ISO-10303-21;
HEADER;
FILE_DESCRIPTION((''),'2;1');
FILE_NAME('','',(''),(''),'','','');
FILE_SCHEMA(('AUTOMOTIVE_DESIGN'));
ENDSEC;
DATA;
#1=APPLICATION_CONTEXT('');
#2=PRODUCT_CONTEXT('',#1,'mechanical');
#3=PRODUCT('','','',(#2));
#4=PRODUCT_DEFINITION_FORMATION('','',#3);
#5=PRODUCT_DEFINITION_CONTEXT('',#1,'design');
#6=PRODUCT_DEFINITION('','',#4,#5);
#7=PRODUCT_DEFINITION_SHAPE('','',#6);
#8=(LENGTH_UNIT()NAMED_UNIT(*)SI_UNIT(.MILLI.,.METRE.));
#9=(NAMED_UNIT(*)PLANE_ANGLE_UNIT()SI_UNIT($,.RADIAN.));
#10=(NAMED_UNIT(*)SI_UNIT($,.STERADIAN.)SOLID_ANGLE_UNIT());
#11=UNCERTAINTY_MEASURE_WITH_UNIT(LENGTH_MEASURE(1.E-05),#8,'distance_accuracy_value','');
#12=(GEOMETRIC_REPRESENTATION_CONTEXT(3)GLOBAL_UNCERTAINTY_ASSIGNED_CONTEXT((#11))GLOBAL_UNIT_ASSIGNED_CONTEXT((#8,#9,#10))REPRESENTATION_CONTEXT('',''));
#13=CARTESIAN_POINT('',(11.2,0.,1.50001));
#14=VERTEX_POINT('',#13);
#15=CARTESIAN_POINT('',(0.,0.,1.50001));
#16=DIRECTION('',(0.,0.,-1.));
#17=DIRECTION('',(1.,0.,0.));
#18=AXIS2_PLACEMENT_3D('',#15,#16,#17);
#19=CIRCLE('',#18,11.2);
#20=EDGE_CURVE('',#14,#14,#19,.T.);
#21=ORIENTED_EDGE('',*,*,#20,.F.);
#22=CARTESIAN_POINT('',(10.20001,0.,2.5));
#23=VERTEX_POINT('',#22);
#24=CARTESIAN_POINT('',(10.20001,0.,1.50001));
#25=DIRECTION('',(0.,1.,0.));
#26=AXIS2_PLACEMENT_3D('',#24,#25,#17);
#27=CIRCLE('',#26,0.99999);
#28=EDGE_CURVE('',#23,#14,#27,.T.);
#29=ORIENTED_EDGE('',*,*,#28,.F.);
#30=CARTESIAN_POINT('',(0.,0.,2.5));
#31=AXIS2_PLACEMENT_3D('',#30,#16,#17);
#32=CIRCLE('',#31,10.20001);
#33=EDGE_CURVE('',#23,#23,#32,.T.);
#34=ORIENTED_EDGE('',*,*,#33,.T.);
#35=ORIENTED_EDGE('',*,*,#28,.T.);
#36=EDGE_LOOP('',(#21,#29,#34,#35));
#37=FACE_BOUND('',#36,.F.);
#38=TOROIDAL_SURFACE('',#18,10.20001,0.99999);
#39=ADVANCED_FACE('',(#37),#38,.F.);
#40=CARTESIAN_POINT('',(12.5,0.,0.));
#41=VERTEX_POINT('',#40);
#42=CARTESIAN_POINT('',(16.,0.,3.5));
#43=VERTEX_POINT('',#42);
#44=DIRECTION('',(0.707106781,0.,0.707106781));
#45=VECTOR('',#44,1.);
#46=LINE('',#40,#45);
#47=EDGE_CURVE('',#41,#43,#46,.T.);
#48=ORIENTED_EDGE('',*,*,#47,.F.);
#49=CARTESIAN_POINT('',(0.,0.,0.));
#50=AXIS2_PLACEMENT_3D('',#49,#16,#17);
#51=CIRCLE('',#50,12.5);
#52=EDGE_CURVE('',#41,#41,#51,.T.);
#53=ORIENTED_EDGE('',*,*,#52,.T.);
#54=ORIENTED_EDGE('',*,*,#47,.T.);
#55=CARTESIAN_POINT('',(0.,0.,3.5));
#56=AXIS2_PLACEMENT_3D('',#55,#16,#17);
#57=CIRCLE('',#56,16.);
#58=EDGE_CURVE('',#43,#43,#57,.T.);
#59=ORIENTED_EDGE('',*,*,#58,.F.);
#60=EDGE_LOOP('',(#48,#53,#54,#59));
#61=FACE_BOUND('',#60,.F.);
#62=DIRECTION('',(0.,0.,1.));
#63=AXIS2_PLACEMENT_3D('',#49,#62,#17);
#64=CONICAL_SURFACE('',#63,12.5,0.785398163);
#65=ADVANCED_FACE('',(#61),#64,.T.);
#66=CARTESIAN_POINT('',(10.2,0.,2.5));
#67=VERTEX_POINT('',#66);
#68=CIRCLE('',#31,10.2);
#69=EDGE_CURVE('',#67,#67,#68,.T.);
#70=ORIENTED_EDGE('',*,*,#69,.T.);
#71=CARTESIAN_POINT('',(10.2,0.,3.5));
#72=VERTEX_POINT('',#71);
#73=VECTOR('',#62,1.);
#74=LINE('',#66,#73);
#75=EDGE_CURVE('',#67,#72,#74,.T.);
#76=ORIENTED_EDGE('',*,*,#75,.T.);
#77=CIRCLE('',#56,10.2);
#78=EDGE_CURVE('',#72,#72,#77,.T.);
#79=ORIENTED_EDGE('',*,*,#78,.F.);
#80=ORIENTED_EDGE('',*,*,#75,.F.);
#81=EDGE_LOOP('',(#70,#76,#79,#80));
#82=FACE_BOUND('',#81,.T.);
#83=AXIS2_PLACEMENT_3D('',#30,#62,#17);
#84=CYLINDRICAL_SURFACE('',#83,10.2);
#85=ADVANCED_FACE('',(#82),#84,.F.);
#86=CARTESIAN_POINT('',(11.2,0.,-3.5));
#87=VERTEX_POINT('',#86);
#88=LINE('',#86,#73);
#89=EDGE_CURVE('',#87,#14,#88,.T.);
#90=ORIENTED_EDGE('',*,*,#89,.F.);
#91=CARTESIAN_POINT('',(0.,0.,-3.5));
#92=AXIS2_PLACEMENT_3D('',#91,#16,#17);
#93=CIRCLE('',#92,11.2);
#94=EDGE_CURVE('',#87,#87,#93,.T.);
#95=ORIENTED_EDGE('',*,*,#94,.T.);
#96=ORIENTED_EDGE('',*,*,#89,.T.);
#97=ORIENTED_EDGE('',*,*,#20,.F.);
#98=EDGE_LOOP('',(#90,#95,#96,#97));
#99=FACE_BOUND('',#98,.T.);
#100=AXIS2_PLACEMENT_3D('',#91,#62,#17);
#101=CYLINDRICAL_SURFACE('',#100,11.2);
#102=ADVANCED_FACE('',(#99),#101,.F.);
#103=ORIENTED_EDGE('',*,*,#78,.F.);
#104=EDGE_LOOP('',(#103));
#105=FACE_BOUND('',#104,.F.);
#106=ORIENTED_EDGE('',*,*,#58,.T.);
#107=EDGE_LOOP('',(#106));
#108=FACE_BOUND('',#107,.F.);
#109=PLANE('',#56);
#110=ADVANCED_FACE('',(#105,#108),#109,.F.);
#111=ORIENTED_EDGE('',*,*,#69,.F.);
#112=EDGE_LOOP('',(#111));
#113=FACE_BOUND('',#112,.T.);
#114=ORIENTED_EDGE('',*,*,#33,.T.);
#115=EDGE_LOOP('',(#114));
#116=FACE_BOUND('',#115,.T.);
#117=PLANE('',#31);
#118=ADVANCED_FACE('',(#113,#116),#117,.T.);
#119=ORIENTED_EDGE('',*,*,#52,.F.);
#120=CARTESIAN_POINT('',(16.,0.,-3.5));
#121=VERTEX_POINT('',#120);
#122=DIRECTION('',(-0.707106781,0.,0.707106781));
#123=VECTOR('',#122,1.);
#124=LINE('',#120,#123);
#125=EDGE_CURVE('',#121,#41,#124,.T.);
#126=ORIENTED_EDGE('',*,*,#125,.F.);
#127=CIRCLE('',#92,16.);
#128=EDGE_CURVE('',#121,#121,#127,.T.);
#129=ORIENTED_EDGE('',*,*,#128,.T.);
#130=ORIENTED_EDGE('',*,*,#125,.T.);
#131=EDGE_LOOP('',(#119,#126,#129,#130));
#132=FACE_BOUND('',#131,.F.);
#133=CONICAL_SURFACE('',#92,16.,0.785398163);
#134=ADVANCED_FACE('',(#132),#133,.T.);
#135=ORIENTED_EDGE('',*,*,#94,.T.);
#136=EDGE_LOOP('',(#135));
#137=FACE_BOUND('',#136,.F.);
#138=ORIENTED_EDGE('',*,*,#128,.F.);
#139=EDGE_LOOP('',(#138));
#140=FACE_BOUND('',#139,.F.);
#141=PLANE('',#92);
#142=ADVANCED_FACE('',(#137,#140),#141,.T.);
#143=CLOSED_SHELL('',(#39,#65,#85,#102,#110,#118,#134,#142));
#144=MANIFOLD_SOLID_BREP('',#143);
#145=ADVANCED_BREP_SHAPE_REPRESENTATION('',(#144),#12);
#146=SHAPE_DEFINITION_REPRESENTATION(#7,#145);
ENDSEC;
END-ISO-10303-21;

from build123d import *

# Parameters (mm, degrees)
F0_W = 1
F0_H = 1
F3_R = 0.99999


# Not quite as in the source:
# - a fillet or chamfer is up to 0.001 mm smaller than in the source, because OpenCascade refuses the exact size


with BuildPart() as f1:
    # F0 (on Front) → F1 (revolve)
    with BuildSketch(Plane.XZ):
        Polygon((16, 3.5), (11.2, 3.5), (11.2, 2.5), (11.2, -3.5), (16, -3.5), (12.5, 0), align=None)
        Polygon((10.2, 3.5), (0, 3.5), (0, -3.5), (11.2, -3.5), (11.2, 2.5), (10.2, 2.5), align=None)
        with Locations((10.7, 3)):
            Rectangle(F0_W, F0_H)
    revolve(axis=Axis((0, 0, -0.2485097927), (0, 0, -1)))

    # F0 (on Front) → F2 (revolve, cut)
    with BuildSketch(Plane.XZ):
        Polygon((10.2, 3.5), (0, 3.5), (0, -3.5), (11.2, -3.5), (11.2, 2.5), (10.2, 2.5), align=None)
    revolve(axis=Axis((0, 0, -0.2485097927), (0, 0, -1)), mode=Mode.SUBTRACT)

    # F3 (radius 1 in the source; OpenCascade refuses exactly that, so slightly less here)
    f3_edges = [f1.edges().sort_by_distance(p)[0] for p in [
        (-11.2, 0, 2.5),
    ]]
    fillet(f3_edges, radius=F3_R)


solid = f1.part
